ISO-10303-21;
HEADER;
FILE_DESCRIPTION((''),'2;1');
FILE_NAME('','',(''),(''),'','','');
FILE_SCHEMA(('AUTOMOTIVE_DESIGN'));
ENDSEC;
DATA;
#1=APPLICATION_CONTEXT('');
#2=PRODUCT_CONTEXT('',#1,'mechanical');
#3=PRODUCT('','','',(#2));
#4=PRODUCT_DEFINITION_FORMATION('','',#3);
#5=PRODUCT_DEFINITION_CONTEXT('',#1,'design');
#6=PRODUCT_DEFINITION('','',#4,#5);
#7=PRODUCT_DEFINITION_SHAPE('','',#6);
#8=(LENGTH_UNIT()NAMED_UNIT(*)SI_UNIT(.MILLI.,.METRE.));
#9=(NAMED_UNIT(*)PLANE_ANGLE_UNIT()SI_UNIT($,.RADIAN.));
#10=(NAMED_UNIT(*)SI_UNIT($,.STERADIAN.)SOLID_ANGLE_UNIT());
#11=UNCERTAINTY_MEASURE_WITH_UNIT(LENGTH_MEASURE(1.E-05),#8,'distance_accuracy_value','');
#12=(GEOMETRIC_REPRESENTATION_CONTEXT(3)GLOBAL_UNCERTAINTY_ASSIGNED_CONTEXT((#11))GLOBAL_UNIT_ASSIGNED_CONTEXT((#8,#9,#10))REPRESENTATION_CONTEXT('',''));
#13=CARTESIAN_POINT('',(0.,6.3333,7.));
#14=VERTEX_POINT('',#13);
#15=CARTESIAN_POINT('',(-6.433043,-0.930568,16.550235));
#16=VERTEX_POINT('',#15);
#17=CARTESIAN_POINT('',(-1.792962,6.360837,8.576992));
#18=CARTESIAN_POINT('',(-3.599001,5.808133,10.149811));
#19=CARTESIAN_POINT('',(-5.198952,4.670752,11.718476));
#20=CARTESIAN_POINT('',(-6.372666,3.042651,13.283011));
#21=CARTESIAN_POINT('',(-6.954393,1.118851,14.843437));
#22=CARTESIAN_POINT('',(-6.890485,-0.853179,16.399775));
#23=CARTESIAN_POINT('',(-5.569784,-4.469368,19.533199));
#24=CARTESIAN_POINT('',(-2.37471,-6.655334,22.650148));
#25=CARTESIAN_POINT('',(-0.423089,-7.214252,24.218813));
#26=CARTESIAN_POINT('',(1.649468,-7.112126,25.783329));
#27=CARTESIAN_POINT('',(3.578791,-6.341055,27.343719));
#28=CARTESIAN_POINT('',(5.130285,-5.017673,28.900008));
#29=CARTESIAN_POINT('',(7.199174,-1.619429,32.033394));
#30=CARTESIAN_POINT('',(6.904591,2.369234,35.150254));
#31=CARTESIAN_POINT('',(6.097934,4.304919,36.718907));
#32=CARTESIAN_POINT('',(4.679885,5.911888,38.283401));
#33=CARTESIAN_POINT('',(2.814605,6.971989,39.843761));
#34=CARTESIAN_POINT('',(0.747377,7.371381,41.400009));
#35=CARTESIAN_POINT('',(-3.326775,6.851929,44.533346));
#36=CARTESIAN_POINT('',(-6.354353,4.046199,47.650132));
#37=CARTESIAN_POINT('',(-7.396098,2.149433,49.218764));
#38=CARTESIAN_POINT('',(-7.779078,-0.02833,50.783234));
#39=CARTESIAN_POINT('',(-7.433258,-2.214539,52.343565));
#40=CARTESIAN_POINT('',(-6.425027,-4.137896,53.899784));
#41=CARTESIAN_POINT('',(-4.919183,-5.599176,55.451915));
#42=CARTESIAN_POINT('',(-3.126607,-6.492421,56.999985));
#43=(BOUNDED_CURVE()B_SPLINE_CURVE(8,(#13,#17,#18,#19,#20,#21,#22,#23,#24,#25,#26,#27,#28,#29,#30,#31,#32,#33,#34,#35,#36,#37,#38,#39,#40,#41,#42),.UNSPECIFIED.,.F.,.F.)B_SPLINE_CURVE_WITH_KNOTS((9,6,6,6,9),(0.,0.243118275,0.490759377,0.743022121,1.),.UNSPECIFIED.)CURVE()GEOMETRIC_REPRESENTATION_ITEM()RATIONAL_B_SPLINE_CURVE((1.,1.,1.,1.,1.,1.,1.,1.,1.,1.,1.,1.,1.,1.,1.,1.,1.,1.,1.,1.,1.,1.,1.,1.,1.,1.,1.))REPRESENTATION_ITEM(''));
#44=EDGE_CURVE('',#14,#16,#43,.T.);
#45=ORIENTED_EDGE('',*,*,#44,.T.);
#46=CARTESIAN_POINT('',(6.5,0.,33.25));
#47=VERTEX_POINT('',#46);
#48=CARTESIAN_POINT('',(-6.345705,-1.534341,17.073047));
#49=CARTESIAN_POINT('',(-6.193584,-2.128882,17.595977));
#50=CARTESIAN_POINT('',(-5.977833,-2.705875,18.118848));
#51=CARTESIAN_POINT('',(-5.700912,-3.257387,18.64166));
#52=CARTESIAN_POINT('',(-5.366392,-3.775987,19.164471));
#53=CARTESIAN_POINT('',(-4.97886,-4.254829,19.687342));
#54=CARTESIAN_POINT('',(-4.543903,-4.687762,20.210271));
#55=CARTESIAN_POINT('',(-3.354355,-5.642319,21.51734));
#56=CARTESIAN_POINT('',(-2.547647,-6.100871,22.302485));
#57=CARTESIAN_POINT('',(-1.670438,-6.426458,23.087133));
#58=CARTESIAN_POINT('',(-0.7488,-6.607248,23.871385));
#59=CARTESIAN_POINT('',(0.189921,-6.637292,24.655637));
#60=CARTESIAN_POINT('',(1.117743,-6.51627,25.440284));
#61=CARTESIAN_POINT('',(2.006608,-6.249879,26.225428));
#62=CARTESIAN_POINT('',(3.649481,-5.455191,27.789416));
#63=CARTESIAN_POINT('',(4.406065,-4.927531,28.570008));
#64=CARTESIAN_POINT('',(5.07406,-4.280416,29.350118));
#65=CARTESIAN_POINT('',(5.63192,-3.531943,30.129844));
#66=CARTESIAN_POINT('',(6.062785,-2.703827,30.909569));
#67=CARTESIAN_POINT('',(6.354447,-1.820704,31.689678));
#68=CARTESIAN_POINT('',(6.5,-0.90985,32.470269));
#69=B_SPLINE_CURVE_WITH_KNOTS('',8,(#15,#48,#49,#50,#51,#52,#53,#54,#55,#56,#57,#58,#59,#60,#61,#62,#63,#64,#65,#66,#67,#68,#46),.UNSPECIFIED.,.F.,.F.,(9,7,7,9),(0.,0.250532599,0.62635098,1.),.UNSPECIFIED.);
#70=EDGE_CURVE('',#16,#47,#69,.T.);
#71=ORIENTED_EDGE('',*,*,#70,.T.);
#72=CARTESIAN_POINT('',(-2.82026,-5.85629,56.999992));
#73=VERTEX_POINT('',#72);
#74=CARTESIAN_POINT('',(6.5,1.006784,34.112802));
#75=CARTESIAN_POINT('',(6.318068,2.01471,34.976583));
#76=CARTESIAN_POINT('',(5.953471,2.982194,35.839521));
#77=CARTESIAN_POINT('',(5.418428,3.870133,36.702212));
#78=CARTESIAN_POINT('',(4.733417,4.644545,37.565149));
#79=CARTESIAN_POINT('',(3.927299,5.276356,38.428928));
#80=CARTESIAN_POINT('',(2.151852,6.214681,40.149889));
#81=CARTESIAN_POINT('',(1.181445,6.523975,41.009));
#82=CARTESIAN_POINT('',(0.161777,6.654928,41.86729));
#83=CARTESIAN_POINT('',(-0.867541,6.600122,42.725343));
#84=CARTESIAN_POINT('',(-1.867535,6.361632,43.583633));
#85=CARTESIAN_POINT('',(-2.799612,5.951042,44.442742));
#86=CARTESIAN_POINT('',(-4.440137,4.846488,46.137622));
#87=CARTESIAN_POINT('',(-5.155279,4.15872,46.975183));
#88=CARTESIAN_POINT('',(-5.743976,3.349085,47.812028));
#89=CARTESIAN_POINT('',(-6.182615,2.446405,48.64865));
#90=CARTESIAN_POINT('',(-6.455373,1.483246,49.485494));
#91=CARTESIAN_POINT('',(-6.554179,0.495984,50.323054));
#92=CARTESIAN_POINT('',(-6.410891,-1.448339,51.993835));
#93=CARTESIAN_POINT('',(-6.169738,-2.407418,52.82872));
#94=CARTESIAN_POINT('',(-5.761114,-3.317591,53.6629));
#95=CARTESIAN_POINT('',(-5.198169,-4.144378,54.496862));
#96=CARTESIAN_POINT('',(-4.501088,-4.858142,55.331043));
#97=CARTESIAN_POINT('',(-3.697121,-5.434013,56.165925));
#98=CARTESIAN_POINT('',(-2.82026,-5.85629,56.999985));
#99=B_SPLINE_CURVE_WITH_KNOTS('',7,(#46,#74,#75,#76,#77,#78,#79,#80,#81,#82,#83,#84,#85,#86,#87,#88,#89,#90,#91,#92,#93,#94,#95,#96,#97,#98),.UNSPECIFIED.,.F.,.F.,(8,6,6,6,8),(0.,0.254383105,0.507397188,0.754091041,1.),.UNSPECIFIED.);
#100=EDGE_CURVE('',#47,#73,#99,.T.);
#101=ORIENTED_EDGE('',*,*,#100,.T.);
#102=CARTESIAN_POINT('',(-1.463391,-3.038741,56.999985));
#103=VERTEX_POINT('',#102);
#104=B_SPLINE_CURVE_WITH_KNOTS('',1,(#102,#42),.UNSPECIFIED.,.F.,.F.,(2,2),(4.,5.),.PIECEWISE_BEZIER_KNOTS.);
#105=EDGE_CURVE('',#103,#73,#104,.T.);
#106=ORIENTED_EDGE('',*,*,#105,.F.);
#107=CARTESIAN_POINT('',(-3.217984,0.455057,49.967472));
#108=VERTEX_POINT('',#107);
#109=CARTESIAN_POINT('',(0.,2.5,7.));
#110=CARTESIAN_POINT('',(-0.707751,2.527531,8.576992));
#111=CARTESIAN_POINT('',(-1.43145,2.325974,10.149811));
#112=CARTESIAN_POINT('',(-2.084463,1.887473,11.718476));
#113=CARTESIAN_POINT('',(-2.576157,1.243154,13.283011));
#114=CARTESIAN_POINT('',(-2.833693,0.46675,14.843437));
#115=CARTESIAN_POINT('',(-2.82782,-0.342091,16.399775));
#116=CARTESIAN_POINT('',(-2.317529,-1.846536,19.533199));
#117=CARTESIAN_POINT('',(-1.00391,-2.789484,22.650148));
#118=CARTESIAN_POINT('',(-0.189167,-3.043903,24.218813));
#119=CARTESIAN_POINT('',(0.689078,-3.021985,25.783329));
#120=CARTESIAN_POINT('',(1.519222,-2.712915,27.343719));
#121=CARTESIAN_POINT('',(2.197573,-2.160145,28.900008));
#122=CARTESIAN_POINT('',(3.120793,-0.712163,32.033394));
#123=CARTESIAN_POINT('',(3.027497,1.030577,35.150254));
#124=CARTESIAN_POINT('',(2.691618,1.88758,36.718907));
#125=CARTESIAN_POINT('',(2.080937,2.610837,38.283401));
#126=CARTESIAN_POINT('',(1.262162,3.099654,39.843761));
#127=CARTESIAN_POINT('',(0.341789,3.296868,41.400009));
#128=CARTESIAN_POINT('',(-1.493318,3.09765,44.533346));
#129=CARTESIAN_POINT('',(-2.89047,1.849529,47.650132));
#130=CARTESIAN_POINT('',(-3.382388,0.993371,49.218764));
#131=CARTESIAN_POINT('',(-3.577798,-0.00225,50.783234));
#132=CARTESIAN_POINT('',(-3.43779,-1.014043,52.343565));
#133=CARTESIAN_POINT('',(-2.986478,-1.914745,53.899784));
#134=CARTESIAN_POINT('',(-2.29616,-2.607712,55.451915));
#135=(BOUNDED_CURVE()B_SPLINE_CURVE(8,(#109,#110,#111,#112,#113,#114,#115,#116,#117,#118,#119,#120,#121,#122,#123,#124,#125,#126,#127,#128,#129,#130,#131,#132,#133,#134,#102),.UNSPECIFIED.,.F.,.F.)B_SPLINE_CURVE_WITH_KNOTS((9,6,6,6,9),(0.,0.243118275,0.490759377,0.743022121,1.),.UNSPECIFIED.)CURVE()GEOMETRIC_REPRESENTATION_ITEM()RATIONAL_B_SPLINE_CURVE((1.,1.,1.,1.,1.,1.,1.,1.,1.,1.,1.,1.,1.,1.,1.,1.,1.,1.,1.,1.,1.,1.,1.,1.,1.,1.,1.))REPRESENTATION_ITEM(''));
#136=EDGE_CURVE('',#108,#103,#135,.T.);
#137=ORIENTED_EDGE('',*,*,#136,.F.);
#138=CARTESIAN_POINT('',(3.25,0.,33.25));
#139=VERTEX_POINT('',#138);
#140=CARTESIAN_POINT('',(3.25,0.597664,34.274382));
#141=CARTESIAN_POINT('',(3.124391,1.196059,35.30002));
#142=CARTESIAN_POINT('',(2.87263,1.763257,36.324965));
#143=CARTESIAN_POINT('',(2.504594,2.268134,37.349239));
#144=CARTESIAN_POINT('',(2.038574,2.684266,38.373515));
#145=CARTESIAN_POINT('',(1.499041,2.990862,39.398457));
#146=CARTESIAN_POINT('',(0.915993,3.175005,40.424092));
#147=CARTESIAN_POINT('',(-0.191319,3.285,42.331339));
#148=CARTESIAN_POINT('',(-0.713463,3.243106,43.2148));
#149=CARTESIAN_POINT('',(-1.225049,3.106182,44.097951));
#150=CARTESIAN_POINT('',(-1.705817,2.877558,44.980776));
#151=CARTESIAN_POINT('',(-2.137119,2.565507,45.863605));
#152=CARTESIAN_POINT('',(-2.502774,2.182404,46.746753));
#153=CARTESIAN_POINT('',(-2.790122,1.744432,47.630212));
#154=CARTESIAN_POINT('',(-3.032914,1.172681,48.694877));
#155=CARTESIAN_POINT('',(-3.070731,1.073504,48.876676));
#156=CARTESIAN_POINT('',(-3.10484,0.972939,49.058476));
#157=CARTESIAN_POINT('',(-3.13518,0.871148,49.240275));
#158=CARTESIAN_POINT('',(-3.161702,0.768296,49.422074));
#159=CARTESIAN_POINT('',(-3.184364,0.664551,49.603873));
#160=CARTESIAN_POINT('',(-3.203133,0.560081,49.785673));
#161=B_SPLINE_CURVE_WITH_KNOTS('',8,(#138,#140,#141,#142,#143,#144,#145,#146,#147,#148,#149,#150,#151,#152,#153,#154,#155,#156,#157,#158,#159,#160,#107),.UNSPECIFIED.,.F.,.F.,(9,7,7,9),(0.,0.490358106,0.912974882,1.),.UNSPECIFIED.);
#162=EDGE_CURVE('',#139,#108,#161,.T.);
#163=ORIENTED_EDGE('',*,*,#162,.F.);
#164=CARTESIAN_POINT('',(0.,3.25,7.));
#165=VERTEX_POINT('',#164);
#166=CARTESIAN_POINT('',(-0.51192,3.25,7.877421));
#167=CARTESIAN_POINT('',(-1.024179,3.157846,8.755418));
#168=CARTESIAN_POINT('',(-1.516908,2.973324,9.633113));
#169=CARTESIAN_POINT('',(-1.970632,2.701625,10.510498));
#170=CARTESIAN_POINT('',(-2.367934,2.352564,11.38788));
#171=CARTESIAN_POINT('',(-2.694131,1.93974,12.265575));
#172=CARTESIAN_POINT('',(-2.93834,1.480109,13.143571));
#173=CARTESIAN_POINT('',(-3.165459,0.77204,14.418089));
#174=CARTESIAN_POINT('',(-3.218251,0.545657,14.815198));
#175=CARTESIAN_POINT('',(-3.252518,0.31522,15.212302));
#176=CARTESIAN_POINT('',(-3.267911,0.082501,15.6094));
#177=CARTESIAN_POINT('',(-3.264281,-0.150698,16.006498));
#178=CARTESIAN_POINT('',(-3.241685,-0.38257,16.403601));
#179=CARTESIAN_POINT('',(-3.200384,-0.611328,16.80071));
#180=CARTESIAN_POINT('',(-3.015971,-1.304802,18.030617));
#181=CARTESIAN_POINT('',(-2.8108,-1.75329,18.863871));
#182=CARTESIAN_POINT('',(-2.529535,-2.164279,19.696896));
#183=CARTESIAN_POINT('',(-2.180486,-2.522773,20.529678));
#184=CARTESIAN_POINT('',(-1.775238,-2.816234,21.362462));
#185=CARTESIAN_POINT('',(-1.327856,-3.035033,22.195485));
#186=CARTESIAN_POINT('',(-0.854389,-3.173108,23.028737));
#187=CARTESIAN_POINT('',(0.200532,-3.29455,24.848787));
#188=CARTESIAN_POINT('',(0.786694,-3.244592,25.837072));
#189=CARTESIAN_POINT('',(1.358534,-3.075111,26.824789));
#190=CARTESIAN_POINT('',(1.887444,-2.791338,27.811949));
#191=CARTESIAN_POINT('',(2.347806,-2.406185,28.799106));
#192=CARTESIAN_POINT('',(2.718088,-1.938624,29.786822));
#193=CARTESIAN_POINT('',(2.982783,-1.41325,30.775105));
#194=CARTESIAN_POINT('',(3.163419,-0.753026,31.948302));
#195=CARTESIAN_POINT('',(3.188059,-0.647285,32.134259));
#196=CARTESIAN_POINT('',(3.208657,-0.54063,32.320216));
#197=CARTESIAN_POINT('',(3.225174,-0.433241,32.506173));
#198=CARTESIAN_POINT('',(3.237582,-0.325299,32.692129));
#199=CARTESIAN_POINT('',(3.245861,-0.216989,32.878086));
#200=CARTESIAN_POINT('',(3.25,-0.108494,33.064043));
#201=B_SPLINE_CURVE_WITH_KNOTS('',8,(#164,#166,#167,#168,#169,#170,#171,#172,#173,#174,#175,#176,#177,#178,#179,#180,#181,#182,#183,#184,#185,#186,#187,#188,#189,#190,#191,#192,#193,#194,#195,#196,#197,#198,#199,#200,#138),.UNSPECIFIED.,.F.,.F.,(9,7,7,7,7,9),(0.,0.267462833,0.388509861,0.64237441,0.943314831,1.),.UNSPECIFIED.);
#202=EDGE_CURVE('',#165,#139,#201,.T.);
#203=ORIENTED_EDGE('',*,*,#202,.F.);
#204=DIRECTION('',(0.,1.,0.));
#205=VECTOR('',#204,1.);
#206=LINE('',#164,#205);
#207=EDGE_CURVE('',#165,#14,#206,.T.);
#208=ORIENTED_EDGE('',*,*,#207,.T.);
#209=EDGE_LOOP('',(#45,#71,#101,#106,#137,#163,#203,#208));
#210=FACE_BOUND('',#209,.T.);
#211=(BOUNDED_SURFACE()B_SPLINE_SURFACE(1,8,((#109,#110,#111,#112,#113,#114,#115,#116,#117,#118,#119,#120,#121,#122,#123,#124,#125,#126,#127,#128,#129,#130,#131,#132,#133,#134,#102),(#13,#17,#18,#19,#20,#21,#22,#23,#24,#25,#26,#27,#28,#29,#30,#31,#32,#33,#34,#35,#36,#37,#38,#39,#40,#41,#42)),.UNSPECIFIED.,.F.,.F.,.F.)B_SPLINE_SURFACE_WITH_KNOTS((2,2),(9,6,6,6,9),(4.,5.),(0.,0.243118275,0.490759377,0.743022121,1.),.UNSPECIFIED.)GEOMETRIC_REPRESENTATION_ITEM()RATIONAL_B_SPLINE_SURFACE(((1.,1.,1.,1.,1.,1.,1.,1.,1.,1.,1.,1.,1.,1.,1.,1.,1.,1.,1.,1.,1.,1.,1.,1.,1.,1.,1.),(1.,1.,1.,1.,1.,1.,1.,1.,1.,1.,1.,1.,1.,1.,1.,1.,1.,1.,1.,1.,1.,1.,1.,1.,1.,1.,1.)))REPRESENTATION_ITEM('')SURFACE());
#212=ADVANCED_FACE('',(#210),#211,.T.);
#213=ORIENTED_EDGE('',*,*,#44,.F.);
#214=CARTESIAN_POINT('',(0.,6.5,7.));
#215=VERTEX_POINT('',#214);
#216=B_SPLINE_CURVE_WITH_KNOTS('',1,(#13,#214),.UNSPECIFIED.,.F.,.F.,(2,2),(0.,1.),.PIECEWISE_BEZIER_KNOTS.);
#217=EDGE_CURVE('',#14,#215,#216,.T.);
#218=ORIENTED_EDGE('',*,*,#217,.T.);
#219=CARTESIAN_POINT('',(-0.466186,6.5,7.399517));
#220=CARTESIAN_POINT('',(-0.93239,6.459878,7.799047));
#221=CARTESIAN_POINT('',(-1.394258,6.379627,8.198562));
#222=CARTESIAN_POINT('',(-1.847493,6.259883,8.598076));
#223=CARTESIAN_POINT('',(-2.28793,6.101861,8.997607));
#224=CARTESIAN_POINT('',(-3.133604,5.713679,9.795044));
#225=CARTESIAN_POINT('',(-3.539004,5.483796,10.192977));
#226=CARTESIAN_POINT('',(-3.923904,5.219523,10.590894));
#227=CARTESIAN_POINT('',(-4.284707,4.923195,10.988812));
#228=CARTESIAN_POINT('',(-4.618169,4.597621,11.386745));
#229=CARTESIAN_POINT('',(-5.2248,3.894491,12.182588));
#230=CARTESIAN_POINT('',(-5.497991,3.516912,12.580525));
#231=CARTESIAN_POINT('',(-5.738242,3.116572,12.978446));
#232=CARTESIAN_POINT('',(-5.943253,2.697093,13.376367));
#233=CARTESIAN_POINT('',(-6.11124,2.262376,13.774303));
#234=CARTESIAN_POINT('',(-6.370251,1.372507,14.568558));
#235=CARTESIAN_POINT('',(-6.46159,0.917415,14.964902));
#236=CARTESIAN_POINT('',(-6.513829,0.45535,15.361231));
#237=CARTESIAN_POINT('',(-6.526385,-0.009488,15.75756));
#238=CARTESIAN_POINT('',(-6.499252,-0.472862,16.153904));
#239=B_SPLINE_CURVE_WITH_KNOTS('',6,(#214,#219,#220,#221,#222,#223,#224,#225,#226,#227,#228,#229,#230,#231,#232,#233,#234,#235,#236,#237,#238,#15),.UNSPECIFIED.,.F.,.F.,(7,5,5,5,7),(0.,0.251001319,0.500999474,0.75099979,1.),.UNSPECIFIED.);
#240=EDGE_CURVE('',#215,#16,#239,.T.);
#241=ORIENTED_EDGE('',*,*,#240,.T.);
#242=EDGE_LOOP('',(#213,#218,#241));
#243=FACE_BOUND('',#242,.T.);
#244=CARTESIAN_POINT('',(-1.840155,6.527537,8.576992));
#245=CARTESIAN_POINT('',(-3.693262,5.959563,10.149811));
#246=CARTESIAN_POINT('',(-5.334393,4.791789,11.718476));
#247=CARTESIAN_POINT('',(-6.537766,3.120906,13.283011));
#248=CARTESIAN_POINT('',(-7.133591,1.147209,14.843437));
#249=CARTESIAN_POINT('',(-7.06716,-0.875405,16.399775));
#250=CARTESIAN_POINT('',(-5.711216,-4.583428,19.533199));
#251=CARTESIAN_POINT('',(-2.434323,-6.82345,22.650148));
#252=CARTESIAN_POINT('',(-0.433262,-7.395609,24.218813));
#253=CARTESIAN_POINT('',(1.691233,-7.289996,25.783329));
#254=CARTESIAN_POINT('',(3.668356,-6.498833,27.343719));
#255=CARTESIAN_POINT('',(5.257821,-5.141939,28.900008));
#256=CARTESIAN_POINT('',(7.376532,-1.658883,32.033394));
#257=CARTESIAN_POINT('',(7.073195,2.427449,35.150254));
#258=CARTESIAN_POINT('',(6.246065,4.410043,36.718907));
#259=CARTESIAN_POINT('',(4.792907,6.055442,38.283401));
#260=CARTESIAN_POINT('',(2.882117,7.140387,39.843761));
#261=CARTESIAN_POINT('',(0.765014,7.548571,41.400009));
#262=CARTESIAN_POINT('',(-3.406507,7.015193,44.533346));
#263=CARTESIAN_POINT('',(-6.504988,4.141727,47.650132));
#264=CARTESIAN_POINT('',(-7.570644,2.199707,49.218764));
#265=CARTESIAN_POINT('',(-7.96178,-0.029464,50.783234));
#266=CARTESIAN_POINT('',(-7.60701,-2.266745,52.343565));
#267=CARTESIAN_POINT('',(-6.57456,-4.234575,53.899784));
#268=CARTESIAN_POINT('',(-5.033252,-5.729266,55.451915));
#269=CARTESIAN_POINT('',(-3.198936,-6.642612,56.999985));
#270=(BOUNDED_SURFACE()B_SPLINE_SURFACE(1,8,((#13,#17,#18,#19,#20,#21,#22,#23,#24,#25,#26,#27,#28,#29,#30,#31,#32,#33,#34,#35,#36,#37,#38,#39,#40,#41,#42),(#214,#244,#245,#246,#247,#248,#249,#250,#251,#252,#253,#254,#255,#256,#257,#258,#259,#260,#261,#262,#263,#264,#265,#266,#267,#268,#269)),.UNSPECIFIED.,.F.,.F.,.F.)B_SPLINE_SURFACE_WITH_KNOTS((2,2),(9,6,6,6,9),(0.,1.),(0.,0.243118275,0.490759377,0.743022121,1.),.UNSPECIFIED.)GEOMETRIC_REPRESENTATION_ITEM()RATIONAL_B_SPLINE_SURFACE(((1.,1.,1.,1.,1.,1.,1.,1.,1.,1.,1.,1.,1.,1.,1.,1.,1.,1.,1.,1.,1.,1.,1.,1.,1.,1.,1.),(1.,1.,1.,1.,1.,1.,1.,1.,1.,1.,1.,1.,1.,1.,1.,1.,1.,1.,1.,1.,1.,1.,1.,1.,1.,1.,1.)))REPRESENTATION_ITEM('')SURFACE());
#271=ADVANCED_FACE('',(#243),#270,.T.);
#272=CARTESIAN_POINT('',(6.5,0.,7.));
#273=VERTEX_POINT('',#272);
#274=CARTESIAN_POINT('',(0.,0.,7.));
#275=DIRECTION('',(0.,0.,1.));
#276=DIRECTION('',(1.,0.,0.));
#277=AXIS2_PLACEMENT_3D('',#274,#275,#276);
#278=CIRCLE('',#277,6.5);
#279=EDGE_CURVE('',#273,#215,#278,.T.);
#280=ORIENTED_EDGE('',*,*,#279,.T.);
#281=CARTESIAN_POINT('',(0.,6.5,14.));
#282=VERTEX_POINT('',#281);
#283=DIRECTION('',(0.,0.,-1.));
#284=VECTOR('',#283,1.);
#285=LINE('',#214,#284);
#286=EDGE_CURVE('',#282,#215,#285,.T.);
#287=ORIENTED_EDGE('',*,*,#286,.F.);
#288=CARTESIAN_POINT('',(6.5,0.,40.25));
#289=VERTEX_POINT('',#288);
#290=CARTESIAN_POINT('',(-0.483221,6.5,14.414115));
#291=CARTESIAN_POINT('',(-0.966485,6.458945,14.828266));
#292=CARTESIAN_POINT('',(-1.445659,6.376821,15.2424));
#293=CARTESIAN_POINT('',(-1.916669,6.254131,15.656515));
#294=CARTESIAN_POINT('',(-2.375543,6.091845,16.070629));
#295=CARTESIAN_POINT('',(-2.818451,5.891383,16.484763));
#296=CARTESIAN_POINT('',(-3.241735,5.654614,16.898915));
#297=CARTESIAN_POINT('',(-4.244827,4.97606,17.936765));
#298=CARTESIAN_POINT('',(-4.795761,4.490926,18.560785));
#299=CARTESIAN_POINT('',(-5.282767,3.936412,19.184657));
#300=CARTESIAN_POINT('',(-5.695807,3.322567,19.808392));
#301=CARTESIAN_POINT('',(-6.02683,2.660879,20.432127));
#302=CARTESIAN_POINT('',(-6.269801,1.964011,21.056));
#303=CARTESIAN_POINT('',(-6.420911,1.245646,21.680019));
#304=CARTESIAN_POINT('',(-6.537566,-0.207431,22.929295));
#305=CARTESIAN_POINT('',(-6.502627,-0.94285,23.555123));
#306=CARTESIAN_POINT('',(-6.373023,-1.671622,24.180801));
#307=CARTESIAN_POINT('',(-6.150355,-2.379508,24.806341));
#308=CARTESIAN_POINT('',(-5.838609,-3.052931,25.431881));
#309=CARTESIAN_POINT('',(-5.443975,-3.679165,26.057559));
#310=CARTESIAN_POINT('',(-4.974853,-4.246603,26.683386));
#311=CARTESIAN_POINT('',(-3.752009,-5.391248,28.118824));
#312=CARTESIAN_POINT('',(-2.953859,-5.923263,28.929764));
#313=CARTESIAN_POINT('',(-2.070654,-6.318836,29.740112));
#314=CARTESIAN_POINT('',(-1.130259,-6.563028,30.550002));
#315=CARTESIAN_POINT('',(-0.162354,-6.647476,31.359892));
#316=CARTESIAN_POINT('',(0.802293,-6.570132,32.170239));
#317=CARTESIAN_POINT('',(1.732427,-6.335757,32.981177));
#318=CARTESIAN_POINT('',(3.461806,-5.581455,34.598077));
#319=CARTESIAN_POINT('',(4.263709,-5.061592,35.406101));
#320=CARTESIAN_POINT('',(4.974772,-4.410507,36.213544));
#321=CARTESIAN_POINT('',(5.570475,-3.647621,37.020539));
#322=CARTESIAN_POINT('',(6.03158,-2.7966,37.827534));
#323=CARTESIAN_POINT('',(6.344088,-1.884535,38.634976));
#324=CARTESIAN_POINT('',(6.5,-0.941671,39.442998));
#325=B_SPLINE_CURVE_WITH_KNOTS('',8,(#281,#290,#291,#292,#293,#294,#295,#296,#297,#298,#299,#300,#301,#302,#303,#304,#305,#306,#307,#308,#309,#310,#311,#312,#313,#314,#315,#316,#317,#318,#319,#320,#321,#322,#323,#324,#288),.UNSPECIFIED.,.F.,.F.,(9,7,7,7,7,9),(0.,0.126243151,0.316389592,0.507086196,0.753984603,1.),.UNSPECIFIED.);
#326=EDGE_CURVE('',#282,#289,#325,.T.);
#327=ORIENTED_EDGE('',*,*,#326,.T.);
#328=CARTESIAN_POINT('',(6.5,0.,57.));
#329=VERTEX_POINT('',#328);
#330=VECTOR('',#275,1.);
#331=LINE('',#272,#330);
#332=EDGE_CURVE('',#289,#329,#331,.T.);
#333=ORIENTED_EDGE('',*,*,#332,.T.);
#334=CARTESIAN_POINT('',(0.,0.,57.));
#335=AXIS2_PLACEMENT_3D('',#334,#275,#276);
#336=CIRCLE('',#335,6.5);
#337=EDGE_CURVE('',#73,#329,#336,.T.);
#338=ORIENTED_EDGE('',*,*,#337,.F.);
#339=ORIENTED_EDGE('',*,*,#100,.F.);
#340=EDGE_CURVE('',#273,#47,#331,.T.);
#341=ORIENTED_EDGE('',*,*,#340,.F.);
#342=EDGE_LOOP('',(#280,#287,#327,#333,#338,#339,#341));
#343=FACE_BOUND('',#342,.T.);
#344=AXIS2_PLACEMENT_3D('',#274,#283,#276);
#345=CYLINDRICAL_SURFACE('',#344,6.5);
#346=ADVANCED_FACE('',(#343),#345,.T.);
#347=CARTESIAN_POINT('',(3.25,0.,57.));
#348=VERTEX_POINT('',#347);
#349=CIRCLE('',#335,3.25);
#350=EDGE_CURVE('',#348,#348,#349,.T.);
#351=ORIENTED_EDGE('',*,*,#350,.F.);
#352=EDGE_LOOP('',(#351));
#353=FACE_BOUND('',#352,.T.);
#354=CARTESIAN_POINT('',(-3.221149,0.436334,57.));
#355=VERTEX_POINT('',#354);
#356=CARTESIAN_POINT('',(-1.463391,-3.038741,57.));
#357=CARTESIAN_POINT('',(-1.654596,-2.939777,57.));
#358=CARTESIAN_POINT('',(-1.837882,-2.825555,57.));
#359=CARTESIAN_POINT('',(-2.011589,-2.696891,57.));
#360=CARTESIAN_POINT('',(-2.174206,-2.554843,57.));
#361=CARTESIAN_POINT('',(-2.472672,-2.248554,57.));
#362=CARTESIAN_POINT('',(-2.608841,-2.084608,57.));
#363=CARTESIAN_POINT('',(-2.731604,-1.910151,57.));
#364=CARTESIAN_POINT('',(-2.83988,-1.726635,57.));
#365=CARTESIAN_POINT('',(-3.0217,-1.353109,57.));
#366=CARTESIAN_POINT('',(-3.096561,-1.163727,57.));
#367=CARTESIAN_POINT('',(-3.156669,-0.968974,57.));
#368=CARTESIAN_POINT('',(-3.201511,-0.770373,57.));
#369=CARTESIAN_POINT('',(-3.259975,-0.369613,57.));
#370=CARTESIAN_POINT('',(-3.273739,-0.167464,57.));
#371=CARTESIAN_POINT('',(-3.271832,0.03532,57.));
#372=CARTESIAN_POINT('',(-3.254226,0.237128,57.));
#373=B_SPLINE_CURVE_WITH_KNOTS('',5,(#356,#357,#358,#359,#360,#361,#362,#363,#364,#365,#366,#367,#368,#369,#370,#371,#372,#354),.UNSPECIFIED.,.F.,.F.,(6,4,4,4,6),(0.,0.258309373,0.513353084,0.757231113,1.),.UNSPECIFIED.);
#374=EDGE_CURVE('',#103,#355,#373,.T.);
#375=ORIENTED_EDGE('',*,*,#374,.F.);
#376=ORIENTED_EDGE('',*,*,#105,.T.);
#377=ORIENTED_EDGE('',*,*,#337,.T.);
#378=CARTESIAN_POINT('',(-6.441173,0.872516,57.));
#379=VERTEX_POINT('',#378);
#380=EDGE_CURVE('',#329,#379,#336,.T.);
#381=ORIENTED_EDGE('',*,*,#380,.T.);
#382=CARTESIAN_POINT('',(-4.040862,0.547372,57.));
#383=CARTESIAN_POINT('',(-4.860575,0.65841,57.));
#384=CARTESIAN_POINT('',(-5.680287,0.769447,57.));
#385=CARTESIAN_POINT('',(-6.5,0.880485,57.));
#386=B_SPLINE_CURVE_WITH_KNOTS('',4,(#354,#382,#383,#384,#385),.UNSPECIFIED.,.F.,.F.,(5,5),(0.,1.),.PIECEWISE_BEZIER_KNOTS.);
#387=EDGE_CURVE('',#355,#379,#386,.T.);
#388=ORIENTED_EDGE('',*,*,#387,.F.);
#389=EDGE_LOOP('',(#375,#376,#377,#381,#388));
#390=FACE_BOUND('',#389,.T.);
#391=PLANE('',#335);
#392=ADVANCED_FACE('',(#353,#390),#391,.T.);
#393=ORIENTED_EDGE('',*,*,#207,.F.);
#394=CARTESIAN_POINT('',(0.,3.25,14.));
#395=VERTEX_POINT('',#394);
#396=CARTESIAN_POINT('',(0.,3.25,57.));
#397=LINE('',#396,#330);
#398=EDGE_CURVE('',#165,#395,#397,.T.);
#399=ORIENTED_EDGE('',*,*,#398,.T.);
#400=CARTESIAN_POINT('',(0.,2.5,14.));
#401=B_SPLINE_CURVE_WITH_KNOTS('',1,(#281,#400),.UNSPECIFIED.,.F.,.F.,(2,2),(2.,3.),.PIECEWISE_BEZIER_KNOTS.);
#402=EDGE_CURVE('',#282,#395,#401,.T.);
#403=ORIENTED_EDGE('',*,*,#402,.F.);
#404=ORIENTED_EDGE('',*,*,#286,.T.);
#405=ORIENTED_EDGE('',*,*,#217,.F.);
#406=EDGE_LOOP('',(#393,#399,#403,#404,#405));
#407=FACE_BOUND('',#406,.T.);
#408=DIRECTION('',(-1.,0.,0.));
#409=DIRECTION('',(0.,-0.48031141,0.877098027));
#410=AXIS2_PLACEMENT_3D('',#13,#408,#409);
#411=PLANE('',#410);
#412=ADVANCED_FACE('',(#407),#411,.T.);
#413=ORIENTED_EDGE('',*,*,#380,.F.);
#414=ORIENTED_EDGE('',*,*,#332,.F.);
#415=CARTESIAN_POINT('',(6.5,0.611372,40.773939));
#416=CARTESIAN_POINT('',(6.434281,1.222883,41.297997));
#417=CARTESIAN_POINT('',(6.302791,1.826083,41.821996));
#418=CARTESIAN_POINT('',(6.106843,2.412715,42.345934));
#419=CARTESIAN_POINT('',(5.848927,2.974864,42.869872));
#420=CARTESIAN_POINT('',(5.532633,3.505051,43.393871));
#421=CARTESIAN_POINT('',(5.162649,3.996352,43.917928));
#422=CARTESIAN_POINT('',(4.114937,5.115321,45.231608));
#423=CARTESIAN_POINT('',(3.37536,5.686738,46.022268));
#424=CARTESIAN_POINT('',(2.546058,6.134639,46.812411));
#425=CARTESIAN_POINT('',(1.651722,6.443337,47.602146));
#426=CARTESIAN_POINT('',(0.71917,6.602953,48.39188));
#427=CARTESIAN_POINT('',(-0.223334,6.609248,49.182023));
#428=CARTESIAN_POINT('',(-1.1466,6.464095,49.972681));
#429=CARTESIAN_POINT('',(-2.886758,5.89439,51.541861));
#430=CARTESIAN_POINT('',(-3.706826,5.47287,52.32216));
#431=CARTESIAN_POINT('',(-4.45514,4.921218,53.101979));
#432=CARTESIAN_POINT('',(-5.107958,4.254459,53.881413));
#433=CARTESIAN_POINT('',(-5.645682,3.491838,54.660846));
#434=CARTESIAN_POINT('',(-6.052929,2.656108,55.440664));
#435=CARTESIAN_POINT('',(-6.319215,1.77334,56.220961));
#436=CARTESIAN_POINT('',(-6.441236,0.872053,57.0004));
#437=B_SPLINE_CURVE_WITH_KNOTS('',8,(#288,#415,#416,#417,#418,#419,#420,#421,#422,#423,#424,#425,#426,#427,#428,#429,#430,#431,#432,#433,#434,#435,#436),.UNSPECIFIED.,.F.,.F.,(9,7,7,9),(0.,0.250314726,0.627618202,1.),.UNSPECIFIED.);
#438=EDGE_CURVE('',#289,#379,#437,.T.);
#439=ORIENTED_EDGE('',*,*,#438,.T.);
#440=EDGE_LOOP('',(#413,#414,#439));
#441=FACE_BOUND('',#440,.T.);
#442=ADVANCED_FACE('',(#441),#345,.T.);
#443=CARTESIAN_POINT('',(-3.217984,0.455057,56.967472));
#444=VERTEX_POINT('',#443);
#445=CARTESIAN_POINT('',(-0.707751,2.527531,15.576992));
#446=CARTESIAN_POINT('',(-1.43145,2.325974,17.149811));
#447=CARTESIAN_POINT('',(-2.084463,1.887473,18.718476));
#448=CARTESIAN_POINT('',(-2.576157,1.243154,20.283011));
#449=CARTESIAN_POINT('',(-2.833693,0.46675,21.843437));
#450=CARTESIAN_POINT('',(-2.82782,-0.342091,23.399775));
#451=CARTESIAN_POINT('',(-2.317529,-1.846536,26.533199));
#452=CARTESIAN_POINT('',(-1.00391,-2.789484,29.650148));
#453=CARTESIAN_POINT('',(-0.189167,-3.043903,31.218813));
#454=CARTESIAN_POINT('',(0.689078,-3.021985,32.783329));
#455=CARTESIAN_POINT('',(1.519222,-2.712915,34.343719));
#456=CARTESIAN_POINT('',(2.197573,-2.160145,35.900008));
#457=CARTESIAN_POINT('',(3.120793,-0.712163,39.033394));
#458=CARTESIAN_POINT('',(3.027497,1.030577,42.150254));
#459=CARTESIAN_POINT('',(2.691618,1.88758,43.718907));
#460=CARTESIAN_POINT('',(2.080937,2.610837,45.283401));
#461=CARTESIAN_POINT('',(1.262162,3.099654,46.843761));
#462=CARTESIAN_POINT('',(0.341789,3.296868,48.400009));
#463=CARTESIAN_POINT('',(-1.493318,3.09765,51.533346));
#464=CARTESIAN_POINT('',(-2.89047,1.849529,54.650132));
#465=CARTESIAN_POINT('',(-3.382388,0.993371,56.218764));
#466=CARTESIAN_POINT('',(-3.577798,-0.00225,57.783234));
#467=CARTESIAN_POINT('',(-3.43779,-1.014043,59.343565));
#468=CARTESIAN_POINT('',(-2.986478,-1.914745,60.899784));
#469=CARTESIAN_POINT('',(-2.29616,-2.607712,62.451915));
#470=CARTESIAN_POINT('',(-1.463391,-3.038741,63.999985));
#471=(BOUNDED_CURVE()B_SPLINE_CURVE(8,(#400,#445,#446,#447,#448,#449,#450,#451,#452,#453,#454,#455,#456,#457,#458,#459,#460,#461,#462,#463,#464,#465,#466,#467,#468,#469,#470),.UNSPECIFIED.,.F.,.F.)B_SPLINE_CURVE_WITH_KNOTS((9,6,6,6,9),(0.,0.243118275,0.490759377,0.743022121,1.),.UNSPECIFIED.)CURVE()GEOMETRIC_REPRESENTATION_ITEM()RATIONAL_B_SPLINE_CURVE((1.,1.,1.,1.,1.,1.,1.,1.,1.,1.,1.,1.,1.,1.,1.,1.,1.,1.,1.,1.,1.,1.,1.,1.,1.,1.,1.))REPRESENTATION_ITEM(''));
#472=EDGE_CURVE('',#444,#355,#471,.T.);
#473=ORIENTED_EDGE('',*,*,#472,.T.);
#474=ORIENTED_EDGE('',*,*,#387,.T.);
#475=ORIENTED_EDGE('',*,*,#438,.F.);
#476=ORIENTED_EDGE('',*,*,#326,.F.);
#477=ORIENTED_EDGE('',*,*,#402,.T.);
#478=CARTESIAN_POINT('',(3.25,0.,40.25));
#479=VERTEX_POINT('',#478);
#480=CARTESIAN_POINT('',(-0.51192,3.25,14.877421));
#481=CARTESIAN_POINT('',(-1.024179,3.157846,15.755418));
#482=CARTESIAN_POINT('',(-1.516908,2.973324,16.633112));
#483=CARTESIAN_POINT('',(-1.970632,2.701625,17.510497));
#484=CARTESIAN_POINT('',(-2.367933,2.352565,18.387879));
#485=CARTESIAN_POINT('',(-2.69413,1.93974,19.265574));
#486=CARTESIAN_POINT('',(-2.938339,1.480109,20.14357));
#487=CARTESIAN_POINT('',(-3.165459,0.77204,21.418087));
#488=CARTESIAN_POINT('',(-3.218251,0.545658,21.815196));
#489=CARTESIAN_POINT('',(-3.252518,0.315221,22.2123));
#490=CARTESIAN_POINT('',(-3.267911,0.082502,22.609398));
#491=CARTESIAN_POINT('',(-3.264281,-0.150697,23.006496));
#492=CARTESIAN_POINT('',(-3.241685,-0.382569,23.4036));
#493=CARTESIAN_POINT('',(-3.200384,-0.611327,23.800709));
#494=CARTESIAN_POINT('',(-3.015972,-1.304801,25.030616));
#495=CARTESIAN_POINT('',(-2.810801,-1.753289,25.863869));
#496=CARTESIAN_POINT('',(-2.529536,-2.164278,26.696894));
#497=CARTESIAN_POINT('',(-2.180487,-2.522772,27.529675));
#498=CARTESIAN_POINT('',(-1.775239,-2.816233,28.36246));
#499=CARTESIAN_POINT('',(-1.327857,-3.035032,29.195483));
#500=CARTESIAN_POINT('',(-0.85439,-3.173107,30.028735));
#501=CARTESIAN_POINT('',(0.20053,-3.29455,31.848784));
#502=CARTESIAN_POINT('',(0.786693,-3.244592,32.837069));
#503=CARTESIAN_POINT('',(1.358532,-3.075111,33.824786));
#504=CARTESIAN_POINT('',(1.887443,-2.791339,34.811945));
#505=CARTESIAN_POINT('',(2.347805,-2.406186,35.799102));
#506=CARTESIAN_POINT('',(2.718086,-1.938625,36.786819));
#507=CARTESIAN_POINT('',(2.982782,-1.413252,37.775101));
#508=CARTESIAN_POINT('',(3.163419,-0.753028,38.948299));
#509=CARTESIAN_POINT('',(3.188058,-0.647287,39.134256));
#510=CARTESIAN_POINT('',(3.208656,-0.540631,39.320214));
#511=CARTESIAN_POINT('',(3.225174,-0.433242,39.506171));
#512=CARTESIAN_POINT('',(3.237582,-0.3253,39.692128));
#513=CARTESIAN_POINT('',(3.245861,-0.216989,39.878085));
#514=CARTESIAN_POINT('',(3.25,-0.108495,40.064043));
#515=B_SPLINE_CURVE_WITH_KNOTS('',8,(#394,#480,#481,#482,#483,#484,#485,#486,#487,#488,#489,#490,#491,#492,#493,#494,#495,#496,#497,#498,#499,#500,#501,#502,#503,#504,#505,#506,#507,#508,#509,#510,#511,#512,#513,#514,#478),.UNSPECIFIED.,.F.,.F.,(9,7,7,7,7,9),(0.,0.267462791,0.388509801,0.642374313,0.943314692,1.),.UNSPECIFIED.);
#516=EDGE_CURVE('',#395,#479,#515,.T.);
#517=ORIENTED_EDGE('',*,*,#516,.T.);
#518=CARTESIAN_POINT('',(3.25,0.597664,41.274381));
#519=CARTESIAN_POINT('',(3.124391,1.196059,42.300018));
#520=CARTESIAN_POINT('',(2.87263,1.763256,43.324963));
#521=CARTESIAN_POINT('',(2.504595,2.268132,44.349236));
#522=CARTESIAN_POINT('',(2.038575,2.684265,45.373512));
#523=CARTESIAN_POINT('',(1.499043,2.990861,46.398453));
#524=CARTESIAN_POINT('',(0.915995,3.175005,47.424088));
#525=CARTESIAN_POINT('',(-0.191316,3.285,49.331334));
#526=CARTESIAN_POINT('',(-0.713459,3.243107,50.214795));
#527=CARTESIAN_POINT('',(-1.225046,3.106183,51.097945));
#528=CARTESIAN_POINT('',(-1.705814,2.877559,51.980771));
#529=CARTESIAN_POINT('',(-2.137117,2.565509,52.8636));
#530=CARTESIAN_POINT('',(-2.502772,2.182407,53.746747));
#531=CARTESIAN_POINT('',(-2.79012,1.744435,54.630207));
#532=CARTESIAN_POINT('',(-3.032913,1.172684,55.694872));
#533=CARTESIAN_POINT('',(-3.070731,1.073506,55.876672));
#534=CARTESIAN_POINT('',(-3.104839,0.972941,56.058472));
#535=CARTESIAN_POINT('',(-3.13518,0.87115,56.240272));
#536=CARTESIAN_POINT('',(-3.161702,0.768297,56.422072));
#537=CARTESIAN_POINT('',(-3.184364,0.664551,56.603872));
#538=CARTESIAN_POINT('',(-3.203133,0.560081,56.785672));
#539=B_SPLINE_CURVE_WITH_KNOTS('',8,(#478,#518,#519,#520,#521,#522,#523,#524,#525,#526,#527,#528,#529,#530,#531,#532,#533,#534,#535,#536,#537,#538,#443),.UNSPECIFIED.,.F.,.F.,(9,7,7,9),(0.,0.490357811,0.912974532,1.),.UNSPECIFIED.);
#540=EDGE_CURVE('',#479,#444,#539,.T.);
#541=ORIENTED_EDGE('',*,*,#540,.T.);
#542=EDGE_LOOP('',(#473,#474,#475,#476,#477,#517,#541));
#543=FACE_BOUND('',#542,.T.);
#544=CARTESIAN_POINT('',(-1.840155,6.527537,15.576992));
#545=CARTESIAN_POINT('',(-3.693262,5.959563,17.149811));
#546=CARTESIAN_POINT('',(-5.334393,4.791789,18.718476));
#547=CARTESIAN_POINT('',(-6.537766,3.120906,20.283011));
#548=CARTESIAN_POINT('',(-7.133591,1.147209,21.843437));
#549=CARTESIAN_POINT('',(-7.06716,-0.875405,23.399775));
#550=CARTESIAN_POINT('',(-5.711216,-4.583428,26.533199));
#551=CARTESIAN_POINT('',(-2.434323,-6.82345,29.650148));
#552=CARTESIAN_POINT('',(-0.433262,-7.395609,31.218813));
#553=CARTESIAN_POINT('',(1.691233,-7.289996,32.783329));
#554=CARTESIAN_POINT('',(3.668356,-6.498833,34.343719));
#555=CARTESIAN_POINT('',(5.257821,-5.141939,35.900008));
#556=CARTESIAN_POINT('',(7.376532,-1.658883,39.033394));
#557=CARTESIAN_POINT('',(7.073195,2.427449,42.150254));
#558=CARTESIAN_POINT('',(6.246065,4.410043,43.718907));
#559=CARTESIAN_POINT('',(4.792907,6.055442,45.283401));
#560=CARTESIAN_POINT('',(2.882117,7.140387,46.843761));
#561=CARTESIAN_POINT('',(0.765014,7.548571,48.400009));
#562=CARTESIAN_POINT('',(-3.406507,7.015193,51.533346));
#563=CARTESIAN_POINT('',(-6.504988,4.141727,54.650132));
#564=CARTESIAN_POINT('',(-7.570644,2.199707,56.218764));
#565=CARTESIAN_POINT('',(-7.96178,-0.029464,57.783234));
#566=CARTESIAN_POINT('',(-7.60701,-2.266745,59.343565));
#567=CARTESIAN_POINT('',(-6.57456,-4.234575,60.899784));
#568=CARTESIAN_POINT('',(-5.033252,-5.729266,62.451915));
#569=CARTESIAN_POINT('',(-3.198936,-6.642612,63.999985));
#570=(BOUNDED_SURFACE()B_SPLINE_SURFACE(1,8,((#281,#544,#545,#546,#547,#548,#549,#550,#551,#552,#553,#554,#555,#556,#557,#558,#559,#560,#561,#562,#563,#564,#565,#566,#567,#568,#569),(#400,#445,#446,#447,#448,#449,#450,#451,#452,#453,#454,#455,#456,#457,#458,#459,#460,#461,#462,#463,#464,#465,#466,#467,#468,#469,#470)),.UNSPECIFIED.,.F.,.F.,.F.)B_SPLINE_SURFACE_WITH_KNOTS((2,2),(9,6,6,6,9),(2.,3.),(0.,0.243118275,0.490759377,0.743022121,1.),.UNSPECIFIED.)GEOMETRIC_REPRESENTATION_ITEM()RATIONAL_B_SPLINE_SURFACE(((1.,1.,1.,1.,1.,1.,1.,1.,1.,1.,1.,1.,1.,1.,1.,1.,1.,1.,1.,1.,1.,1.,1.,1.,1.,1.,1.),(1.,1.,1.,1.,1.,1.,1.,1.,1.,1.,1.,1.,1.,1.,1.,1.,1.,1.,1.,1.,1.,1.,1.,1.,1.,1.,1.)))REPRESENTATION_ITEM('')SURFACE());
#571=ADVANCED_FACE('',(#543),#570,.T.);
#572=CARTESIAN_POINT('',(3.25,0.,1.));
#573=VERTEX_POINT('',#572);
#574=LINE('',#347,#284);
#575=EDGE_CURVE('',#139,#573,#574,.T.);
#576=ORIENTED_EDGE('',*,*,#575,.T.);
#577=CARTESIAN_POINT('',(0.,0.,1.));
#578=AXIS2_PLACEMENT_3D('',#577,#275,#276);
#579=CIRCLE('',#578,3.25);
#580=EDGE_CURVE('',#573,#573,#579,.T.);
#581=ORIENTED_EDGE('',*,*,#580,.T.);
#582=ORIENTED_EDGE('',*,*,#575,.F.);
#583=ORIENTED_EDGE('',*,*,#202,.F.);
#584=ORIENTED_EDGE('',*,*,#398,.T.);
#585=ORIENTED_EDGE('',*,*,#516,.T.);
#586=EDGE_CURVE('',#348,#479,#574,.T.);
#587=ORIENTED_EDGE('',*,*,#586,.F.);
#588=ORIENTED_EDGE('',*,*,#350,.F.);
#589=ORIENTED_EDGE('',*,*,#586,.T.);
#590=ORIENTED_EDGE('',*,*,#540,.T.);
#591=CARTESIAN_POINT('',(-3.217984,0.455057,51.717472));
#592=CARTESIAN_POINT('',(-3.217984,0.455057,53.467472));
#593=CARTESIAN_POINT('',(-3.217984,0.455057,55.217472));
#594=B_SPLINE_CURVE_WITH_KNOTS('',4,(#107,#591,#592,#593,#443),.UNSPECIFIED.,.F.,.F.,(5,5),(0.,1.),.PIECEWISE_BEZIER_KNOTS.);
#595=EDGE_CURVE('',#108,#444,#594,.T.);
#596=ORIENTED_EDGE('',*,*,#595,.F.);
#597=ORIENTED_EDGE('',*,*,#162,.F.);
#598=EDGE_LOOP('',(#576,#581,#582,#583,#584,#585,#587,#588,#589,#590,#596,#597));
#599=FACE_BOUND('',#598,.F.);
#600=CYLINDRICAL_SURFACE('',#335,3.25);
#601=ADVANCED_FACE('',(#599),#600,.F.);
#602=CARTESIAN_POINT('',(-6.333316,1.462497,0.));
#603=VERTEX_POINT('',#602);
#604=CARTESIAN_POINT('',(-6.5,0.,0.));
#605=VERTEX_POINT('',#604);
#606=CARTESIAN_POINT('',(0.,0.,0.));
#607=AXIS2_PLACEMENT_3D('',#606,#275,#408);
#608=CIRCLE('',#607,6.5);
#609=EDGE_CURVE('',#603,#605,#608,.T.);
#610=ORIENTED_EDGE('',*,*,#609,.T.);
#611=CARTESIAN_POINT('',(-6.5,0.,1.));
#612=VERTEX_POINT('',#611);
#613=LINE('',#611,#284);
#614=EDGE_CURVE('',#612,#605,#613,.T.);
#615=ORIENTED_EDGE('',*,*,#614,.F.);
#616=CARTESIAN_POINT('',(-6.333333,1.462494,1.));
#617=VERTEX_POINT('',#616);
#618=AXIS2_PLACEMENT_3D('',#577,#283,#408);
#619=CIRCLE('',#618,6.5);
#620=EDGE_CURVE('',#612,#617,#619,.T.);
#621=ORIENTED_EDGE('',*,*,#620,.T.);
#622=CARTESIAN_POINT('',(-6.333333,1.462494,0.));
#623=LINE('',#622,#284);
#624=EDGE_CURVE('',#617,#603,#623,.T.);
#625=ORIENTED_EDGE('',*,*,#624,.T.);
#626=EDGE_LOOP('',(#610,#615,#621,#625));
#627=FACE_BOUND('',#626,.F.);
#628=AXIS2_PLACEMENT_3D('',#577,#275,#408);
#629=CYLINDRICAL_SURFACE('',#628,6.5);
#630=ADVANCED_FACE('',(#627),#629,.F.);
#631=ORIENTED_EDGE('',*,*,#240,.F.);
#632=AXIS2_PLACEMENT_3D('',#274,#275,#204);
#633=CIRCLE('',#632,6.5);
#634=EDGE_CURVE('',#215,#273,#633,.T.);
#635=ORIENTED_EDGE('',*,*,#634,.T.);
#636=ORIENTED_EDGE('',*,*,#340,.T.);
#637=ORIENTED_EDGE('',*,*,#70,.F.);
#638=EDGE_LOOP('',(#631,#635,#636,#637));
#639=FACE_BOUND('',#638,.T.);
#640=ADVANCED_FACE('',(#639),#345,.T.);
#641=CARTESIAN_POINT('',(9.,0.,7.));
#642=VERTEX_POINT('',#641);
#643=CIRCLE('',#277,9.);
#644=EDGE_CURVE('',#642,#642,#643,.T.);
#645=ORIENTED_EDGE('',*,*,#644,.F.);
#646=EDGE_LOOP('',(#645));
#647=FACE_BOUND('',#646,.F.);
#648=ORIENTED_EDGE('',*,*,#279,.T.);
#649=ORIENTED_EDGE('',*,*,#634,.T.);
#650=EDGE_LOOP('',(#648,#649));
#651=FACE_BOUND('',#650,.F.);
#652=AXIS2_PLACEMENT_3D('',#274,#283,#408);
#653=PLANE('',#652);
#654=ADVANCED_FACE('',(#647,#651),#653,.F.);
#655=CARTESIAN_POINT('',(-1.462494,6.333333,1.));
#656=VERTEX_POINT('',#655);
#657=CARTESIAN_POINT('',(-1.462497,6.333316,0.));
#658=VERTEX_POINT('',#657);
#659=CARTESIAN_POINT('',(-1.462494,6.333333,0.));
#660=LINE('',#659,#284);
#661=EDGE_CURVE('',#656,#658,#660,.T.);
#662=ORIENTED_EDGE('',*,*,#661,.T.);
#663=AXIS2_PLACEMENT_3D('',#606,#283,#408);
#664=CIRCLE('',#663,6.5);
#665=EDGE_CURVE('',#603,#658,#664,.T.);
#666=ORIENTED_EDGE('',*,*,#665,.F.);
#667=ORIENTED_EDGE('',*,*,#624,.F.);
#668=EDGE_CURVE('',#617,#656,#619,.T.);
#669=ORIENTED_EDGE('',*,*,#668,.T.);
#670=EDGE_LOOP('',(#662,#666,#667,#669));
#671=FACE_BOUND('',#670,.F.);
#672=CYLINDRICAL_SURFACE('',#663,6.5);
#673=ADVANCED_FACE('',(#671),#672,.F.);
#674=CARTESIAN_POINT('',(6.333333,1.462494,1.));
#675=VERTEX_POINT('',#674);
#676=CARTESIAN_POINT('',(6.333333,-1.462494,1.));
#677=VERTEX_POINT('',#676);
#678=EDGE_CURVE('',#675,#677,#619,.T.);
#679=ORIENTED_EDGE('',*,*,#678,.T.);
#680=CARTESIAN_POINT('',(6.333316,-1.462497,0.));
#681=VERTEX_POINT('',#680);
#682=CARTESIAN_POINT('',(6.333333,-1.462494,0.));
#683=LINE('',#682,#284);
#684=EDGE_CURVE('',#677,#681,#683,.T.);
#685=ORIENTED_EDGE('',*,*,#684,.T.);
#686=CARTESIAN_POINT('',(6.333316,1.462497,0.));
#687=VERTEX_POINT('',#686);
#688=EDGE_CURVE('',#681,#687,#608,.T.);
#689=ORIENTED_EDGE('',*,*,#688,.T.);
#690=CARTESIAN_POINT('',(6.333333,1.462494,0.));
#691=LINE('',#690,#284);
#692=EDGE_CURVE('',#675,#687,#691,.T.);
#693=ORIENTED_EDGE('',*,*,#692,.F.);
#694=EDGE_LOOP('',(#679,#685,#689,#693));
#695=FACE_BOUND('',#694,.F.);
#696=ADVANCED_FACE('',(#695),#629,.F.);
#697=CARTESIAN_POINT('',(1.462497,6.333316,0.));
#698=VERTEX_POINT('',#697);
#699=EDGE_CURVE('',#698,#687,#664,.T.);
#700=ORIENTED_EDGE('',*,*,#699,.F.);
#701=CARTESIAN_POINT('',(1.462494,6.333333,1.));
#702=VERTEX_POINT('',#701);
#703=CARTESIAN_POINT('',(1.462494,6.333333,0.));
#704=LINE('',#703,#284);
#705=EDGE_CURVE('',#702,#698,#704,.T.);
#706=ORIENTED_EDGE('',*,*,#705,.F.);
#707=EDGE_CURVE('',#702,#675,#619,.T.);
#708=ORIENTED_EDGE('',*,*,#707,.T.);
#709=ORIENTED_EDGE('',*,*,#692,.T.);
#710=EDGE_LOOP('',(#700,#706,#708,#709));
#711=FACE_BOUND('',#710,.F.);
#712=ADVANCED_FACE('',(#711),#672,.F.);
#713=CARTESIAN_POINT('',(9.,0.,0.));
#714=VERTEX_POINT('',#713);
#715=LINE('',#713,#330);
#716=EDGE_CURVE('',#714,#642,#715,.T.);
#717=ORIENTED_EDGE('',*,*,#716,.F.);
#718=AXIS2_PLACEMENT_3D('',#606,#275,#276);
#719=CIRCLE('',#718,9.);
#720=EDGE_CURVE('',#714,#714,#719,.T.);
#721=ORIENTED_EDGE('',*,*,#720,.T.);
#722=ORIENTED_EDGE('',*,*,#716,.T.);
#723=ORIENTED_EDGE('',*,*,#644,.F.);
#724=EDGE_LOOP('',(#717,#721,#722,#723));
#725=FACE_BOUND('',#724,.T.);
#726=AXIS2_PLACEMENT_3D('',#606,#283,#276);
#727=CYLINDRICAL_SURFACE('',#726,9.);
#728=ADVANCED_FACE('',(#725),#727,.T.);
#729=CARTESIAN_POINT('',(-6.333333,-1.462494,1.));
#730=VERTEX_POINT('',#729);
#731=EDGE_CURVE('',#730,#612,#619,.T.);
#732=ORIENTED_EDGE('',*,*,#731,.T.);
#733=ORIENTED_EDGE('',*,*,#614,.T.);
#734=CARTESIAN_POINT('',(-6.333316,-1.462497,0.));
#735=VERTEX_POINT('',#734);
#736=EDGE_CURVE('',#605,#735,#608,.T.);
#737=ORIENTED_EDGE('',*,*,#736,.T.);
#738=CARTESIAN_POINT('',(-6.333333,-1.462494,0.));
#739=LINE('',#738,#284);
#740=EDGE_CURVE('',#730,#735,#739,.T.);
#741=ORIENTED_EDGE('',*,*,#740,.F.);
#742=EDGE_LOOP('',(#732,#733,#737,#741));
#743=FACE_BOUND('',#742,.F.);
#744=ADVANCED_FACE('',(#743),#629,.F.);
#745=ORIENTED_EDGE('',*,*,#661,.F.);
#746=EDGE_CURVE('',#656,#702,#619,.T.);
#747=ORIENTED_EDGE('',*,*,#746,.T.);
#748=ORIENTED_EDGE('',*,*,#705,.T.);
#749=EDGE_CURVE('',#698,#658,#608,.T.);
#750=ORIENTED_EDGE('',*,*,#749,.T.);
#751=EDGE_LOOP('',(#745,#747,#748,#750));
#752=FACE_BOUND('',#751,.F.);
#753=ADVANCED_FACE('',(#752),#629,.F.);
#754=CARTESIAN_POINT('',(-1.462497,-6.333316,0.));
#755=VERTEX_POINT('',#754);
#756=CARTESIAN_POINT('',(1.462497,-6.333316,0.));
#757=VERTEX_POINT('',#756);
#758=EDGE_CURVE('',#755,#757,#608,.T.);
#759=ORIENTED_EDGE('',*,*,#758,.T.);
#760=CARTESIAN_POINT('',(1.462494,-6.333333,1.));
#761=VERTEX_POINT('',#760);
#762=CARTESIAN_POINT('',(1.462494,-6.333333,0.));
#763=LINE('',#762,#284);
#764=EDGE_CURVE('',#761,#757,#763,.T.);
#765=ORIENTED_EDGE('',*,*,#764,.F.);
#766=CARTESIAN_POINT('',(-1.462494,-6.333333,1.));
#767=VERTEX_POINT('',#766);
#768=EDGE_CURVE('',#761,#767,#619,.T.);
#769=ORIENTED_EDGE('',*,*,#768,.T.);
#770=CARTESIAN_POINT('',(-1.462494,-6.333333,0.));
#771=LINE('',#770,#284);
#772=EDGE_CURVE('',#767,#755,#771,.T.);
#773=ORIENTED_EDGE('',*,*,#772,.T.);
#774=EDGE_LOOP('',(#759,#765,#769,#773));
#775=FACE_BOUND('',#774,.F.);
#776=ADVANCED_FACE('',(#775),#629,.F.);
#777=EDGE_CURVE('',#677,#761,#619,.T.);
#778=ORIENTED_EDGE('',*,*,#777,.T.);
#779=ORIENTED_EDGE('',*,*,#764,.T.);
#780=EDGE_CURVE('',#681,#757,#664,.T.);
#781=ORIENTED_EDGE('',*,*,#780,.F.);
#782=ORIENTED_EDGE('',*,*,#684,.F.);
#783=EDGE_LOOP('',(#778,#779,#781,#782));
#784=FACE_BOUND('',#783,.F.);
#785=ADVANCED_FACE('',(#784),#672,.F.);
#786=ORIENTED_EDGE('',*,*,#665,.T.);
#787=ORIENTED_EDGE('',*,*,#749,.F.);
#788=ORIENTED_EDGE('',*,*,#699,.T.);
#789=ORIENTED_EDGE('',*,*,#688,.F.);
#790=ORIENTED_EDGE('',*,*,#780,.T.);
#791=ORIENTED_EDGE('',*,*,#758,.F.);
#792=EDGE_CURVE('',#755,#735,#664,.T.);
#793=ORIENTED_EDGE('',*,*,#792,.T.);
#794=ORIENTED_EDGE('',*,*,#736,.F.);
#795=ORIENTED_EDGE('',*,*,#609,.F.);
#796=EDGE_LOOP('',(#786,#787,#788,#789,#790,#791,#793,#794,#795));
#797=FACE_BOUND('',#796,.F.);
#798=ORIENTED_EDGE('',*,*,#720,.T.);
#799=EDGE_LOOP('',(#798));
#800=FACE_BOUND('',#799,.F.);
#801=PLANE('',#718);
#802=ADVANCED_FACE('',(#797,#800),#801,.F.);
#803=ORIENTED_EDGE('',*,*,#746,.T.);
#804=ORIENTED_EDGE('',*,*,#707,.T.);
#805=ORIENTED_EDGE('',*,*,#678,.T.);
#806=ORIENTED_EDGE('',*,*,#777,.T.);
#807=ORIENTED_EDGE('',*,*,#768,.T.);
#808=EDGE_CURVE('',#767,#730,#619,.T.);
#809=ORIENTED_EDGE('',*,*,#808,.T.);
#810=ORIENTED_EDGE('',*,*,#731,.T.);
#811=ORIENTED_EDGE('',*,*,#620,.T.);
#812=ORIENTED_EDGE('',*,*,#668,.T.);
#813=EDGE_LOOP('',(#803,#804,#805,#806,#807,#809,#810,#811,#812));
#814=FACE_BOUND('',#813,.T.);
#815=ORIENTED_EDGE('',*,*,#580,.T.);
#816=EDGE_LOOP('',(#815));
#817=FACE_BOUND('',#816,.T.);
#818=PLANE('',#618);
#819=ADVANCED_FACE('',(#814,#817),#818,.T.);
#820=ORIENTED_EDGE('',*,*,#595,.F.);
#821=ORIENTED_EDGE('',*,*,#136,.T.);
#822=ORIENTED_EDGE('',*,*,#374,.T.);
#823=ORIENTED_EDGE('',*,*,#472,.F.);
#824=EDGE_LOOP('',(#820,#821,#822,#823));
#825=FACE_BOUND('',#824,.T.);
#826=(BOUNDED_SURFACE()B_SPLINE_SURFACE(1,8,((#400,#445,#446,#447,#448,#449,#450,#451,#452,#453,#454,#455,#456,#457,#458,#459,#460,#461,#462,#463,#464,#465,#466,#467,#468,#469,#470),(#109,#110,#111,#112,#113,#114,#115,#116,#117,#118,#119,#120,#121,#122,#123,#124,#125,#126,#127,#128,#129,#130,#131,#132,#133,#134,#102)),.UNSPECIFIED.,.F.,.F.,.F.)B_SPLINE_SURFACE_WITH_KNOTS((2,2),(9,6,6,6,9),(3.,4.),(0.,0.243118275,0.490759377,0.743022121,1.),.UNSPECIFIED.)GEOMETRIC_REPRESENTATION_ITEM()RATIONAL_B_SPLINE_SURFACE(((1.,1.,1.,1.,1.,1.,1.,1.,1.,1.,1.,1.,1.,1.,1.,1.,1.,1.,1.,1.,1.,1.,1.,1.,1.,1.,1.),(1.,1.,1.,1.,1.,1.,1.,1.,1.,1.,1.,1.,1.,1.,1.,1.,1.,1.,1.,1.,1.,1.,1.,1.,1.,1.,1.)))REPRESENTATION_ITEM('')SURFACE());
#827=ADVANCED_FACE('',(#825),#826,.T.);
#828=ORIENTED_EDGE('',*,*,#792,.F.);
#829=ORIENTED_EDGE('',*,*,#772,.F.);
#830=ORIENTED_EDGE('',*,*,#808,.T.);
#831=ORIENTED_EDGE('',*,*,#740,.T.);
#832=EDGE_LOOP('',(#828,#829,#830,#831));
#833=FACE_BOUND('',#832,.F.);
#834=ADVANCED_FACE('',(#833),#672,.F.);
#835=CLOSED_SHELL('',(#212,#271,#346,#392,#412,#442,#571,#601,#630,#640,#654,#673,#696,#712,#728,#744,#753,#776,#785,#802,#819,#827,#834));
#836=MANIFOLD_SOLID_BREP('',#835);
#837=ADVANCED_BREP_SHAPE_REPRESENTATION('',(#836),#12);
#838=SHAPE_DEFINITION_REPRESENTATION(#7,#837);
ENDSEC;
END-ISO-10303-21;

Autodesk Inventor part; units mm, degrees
ref_plane "YZ Plane" through (0, 0, 0) normal (1, 0, 0) x (0, 1, 0)
ref_plane "XY Plane" through (0, 0, 0) normal (0, 0, 1) x (1, 0, 0)
sketch "Sketch1" plane through (0, 0, 0) normal (0, 0, 1) x (1, 0, 0)
  line L0 (0, 0) -> (0, 6)
  circle A0 centre (0, 6) radius 1.5
  circle A1 centre (-4.2426, 4.2426) radius 1.5
  circle A2 centre (-6, 0) radius 1.5
  circle A3 centre (-4.2426, -4.2426) radius 1.5
  circle A4 centre (0, -6) radius 1.5
  circle A5 centre (4.2426, -4.2426) radius 1.5
  circle A6 centre (6, 0) radius 1.5
  circle A7 centre (4.2426, 4.2426) radius 1.5
  circle A8 centre (0, 0) radius 9
  dimension "d0" = 6
  dimension "d1" = 3
  dimension "d4" = 360
  dimension "d6" = 18
extrude "Extrusion1" add sketch "Sketch1" along normal blind 7 contours A1 | A3 | A5 | A7 | A8
sketch "Sketch2" plane through (0, 0, 0) normal (0, 0, -1) x (-1, 0, 0)
  circle A0 centre (0, 0) radius 6.5
  dimension "d9" = 13
extrude "Extrusion2" cut sketch "Sketch2" against normal blind 1
sketch "Sketch3" plane through (0, 0, 7) normal (0, 0, 1) x (1, 0, 0)
  circle A0 centre (0, 0) radius 6.5
  dimension "d12" = 13
extrude "Extrusion3" add sketch "Sketch3" along normal blind 50
sketch "Sketch5" plane through (0, 0, 57) normal (0, 0, 1) x (1, 0, 0)
  circle A0 centre (0, 0) radius 3.25
  dimension "d25" = 6.5
extrude "Extrusion5" cut sketch "Sketch5" against normal up to surface (56 mm away)
ref_plane "Work Plane1" through (0, 12, 0) normal (0, 1, 0) x (-1, 0, 0)
sketch "Sketch8" plane through (0, 0, 7) normal (0, 0, 1) x (1, 0, 0)
  circle A0 centre (0, 0) radius 3
  dimension "d44" = 6
extrude "Extrusion8" cut sketch "Sketch8" against normal through all
sketch "Sketch9" plane through (0, 0, 0) normal (1, 0, 0) x (0, 1, 0)
  line L0 (6.5, 7) -> (6.5, 57) projected
  line L1 (6.5, 7) -> (6.5, 57) projected
  line L2 (6.3333, 7) -> (7.5, 7) projected
  line L3 (7.5, 7) -> (2.5, 7)
  line L4 (2.5, 7) -> (2.5, 14)
  line L5 (2.5, 14) -> (7.5, 14)
  line L6 (7.5, 14) -> (7.5, 7)
  line L7 (0, -11.4) -> (0, 68.4) projected
  point P0 (0, 0)
  dimension "d61" = 5
  dimension "d62" = 7
coil "Coil2" sketch "Sketch9" operation cut axis through (0, 0, 7) along (0, 0, 1) pitch 35 turns 1.428571 hand right taper 1
sketch "Boceto13" plane through (0, 0, 0) normal (0, 0, -1) x (-1, 0, 0)
  arc A0 (-6.3333, 1.4625) -> (-6.3333, -1.4625) centre (-6, 0) ccw projected
  circle A1 centre (-6, 0) radius 1.5
  arc A2 (-1.4625, -6.3333) -> (1.4625, -6.3333) centre (0, -6) ccw projected
  circle A3 centre (0, -6) radius 1.5
  arc A4 (1.4625, 6.3333) -> (-1.4625, 6.3333) centre (0, 6) ccw projected
  circle A5 centre (0, 6) radius 1.5
  arc A6 (6.3333, -1.4625) -> (6.3333, 1.4625) centre (6, 0) ccw projected
  circle A7 centre (6, 0) radius 1.5
  point P0 (0, 0)
extrude "Extrusión9" add sketch "Boceto13" against normal blind 7
sketch "Boceto14" plane through (0, 0, 1) normal (0, 0, -1) x (-1, 0, 0)
  circle A0 centre (0, 0) radius 6.5
extrude "Extrusión10" cut sketch "Boceto14" along normal blind 2
properties part number "ScrewActuatorGripper_2"
